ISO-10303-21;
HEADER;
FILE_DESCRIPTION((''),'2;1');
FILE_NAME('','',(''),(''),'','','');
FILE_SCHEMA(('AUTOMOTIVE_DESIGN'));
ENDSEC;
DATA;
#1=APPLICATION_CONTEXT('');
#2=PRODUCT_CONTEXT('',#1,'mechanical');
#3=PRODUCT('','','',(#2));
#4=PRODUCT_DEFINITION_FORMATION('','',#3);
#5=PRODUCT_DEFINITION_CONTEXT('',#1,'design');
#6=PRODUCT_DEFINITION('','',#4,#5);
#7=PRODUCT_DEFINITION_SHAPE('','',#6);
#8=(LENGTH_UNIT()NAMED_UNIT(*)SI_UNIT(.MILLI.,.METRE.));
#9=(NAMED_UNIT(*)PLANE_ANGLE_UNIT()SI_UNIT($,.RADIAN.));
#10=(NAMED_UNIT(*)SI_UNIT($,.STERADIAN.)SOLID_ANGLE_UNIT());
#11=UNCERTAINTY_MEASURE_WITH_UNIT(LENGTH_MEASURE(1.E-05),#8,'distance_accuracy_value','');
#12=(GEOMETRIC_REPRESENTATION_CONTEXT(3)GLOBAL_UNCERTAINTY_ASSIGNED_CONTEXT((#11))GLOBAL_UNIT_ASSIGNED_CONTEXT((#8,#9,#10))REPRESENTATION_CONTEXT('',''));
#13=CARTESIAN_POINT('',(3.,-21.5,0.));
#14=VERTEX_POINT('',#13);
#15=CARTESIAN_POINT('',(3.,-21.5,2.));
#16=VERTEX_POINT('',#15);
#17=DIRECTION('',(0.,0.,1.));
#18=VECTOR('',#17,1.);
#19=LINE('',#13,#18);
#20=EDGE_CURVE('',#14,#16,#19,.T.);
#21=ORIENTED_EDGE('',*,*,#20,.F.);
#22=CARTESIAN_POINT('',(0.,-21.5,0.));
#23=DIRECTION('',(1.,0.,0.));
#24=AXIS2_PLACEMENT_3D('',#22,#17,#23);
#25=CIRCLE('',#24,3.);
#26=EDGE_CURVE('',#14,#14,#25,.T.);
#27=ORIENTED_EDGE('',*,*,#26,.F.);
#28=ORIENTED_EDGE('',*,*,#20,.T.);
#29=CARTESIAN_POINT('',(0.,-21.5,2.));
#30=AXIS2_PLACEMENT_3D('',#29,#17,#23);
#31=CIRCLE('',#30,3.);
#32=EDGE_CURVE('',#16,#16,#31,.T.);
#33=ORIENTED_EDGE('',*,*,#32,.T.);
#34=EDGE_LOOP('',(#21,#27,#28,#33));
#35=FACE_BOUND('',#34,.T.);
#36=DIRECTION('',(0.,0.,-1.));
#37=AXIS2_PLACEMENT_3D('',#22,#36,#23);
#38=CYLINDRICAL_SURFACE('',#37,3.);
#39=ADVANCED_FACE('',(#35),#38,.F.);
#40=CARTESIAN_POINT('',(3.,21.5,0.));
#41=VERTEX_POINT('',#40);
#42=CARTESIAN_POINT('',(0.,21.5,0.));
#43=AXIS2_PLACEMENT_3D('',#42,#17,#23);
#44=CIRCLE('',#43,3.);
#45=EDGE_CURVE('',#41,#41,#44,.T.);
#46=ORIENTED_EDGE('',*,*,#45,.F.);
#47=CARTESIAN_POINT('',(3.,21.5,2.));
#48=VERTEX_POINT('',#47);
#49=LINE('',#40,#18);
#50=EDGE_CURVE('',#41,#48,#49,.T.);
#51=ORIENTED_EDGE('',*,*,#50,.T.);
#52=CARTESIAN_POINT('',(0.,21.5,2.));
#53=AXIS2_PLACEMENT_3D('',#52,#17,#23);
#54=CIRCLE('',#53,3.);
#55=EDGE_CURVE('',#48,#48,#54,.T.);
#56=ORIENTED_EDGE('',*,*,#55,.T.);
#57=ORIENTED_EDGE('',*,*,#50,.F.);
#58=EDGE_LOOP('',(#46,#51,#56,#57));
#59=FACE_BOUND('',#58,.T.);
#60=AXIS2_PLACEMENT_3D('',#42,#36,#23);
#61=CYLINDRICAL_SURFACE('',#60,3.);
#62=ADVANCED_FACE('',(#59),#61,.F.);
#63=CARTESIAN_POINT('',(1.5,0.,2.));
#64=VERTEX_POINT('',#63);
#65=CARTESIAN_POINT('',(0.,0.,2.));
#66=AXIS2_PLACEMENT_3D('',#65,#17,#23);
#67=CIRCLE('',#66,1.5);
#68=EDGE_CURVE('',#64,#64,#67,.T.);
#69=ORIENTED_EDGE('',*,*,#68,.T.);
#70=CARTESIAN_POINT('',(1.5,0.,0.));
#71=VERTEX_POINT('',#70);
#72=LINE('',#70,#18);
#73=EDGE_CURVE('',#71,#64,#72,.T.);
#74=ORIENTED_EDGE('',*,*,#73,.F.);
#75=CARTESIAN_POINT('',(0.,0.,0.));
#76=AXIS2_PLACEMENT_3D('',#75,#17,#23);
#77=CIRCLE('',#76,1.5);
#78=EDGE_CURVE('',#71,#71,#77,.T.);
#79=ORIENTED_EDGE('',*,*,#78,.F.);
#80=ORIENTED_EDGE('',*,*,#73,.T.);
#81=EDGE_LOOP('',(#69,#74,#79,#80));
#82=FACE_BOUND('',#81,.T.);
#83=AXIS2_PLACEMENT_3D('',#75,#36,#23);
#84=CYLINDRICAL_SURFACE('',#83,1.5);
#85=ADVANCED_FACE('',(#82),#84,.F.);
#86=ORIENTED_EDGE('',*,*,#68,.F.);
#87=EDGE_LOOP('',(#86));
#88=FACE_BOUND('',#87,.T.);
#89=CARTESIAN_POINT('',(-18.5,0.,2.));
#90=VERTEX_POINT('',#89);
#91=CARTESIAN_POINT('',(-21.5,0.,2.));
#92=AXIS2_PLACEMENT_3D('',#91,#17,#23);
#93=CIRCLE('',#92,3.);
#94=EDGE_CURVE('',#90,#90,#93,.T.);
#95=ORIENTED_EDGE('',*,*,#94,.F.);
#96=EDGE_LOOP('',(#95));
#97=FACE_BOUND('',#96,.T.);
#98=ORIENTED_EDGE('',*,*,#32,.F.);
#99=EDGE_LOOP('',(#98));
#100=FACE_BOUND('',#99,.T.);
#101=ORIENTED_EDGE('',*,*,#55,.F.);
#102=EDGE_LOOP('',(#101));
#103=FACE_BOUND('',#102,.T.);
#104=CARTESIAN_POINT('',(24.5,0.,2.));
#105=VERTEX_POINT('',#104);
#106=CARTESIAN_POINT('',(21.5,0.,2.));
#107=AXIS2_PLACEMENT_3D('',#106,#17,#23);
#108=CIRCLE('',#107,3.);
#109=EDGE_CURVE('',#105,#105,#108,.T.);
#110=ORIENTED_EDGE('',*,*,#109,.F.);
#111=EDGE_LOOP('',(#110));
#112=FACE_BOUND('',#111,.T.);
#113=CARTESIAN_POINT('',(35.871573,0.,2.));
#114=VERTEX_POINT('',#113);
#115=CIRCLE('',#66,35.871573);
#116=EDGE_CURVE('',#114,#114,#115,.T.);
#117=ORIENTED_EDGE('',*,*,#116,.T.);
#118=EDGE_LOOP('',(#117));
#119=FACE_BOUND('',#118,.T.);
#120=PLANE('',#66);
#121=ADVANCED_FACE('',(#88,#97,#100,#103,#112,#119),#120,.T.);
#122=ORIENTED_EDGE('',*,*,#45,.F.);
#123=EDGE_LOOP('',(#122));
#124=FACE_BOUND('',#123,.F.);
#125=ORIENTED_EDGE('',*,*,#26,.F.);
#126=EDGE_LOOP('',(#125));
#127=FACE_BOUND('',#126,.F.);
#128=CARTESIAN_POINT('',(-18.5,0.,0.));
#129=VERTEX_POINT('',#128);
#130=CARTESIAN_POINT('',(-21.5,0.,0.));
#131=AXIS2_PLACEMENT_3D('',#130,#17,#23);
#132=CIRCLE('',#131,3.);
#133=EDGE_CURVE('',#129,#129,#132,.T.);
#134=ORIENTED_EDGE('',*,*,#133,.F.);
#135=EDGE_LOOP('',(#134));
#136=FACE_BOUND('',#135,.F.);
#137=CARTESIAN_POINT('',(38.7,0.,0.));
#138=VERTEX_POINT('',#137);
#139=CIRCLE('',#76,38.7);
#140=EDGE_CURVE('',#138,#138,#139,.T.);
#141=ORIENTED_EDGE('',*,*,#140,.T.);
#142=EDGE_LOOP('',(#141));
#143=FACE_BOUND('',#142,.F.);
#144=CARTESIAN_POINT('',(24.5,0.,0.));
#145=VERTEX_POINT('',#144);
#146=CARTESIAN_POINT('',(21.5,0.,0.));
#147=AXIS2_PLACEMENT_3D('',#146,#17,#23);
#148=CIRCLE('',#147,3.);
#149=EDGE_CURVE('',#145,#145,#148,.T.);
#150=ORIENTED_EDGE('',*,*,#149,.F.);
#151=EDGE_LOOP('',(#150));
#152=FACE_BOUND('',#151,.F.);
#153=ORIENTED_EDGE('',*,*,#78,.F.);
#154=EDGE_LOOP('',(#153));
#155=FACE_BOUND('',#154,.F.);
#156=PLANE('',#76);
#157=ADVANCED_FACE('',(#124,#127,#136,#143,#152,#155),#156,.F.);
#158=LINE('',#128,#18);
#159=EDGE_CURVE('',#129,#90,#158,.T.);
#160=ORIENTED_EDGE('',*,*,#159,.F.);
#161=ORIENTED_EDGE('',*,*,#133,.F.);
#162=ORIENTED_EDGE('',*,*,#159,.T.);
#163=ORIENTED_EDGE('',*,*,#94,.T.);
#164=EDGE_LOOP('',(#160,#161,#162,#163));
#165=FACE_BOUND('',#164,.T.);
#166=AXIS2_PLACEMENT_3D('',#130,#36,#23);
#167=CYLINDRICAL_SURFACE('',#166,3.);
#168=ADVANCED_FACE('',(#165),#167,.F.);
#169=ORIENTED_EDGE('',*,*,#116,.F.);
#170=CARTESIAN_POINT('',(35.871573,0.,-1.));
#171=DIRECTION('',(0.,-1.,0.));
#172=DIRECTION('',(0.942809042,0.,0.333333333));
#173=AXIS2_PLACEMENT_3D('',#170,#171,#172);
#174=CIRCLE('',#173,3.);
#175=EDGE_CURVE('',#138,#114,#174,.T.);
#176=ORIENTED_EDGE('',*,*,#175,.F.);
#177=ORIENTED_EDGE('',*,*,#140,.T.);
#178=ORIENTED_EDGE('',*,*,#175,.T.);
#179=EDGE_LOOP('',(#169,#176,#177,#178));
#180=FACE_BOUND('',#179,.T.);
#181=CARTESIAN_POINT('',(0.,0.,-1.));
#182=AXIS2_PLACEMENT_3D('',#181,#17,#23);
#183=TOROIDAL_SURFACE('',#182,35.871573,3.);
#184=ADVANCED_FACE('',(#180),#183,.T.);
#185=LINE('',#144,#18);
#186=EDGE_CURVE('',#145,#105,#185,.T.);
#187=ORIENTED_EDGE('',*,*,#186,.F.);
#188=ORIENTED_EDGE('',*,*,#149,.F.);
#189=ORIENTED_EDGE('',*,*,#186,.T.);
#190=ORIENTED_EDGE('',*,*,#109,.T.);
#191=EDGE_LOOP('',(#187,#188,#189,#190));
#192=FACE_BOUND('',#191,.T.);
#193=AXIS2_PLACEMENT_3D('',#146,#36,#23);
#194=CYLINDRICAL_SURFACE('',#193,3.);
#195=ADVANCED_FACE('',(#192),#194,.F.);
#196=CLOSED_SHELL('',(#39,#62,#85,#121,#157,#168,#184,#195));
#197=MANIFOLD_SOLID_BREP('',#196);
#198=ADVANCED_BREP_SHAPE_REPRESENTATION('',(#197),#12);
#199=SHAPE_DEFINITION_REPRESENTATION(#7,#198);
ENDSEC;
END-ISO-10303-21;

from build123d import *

# Parameters (mm, degrees)
F0_R     = 38.7
F0_R_2   = 3
F0_R_3   = 1.5
F1_DEPTH = 2


# Not quite as in the source:
# - a fillet or chamfer that OpenCascade refuses, or shapes differently, is made with other operations: its cross-section is extruded or revolved along the edge and cut away or added


with BuildPart() as f1:
    # F0 (on Top) → F1 (new body)
    with BuildSketch(Plane.XY):
        Circle(F0_R)
        with Locations((0, -21.5)):
            Circle(F0_R_2, mode=Mode.SUBTRACT)
        with Locations((-21.5, 0)):
            Circle(F0_R_2, mode=Mode.SUBTRACT)
        Circle(F0_R_3, mode=Mode.SUBTRACT)
        with Locations((21.5, 0)):
            Circle(F0_R_2, mode=Mode.SUBTRACT)
        with Locations((0, 21.5)):
            Circle(F0_R_2, mode=Mode.SUBTRACT)
    extrude(amount=F1_DEPTH)

    # F2: fillet of radius 3 on 1 edges, made by hand

    # F2_s1 → F2_t2 (revolve, cut)
    with BuildSketch(Plane.XZ):
        with BuildLine():
            ThreePointArc((38.7, 0), (37.6036236828, 1.4494897428), (35.8715728753, 2))
            Line((35.8715728753, 2), (38.7, 2))
            Line((38.7, 2), (38.7, 0))
        make_face()
    revolve(axis=Axis((0, 0, 2), (0, 0, 1)), mode=Mode.SUBTRACT)


solid = f1.part
